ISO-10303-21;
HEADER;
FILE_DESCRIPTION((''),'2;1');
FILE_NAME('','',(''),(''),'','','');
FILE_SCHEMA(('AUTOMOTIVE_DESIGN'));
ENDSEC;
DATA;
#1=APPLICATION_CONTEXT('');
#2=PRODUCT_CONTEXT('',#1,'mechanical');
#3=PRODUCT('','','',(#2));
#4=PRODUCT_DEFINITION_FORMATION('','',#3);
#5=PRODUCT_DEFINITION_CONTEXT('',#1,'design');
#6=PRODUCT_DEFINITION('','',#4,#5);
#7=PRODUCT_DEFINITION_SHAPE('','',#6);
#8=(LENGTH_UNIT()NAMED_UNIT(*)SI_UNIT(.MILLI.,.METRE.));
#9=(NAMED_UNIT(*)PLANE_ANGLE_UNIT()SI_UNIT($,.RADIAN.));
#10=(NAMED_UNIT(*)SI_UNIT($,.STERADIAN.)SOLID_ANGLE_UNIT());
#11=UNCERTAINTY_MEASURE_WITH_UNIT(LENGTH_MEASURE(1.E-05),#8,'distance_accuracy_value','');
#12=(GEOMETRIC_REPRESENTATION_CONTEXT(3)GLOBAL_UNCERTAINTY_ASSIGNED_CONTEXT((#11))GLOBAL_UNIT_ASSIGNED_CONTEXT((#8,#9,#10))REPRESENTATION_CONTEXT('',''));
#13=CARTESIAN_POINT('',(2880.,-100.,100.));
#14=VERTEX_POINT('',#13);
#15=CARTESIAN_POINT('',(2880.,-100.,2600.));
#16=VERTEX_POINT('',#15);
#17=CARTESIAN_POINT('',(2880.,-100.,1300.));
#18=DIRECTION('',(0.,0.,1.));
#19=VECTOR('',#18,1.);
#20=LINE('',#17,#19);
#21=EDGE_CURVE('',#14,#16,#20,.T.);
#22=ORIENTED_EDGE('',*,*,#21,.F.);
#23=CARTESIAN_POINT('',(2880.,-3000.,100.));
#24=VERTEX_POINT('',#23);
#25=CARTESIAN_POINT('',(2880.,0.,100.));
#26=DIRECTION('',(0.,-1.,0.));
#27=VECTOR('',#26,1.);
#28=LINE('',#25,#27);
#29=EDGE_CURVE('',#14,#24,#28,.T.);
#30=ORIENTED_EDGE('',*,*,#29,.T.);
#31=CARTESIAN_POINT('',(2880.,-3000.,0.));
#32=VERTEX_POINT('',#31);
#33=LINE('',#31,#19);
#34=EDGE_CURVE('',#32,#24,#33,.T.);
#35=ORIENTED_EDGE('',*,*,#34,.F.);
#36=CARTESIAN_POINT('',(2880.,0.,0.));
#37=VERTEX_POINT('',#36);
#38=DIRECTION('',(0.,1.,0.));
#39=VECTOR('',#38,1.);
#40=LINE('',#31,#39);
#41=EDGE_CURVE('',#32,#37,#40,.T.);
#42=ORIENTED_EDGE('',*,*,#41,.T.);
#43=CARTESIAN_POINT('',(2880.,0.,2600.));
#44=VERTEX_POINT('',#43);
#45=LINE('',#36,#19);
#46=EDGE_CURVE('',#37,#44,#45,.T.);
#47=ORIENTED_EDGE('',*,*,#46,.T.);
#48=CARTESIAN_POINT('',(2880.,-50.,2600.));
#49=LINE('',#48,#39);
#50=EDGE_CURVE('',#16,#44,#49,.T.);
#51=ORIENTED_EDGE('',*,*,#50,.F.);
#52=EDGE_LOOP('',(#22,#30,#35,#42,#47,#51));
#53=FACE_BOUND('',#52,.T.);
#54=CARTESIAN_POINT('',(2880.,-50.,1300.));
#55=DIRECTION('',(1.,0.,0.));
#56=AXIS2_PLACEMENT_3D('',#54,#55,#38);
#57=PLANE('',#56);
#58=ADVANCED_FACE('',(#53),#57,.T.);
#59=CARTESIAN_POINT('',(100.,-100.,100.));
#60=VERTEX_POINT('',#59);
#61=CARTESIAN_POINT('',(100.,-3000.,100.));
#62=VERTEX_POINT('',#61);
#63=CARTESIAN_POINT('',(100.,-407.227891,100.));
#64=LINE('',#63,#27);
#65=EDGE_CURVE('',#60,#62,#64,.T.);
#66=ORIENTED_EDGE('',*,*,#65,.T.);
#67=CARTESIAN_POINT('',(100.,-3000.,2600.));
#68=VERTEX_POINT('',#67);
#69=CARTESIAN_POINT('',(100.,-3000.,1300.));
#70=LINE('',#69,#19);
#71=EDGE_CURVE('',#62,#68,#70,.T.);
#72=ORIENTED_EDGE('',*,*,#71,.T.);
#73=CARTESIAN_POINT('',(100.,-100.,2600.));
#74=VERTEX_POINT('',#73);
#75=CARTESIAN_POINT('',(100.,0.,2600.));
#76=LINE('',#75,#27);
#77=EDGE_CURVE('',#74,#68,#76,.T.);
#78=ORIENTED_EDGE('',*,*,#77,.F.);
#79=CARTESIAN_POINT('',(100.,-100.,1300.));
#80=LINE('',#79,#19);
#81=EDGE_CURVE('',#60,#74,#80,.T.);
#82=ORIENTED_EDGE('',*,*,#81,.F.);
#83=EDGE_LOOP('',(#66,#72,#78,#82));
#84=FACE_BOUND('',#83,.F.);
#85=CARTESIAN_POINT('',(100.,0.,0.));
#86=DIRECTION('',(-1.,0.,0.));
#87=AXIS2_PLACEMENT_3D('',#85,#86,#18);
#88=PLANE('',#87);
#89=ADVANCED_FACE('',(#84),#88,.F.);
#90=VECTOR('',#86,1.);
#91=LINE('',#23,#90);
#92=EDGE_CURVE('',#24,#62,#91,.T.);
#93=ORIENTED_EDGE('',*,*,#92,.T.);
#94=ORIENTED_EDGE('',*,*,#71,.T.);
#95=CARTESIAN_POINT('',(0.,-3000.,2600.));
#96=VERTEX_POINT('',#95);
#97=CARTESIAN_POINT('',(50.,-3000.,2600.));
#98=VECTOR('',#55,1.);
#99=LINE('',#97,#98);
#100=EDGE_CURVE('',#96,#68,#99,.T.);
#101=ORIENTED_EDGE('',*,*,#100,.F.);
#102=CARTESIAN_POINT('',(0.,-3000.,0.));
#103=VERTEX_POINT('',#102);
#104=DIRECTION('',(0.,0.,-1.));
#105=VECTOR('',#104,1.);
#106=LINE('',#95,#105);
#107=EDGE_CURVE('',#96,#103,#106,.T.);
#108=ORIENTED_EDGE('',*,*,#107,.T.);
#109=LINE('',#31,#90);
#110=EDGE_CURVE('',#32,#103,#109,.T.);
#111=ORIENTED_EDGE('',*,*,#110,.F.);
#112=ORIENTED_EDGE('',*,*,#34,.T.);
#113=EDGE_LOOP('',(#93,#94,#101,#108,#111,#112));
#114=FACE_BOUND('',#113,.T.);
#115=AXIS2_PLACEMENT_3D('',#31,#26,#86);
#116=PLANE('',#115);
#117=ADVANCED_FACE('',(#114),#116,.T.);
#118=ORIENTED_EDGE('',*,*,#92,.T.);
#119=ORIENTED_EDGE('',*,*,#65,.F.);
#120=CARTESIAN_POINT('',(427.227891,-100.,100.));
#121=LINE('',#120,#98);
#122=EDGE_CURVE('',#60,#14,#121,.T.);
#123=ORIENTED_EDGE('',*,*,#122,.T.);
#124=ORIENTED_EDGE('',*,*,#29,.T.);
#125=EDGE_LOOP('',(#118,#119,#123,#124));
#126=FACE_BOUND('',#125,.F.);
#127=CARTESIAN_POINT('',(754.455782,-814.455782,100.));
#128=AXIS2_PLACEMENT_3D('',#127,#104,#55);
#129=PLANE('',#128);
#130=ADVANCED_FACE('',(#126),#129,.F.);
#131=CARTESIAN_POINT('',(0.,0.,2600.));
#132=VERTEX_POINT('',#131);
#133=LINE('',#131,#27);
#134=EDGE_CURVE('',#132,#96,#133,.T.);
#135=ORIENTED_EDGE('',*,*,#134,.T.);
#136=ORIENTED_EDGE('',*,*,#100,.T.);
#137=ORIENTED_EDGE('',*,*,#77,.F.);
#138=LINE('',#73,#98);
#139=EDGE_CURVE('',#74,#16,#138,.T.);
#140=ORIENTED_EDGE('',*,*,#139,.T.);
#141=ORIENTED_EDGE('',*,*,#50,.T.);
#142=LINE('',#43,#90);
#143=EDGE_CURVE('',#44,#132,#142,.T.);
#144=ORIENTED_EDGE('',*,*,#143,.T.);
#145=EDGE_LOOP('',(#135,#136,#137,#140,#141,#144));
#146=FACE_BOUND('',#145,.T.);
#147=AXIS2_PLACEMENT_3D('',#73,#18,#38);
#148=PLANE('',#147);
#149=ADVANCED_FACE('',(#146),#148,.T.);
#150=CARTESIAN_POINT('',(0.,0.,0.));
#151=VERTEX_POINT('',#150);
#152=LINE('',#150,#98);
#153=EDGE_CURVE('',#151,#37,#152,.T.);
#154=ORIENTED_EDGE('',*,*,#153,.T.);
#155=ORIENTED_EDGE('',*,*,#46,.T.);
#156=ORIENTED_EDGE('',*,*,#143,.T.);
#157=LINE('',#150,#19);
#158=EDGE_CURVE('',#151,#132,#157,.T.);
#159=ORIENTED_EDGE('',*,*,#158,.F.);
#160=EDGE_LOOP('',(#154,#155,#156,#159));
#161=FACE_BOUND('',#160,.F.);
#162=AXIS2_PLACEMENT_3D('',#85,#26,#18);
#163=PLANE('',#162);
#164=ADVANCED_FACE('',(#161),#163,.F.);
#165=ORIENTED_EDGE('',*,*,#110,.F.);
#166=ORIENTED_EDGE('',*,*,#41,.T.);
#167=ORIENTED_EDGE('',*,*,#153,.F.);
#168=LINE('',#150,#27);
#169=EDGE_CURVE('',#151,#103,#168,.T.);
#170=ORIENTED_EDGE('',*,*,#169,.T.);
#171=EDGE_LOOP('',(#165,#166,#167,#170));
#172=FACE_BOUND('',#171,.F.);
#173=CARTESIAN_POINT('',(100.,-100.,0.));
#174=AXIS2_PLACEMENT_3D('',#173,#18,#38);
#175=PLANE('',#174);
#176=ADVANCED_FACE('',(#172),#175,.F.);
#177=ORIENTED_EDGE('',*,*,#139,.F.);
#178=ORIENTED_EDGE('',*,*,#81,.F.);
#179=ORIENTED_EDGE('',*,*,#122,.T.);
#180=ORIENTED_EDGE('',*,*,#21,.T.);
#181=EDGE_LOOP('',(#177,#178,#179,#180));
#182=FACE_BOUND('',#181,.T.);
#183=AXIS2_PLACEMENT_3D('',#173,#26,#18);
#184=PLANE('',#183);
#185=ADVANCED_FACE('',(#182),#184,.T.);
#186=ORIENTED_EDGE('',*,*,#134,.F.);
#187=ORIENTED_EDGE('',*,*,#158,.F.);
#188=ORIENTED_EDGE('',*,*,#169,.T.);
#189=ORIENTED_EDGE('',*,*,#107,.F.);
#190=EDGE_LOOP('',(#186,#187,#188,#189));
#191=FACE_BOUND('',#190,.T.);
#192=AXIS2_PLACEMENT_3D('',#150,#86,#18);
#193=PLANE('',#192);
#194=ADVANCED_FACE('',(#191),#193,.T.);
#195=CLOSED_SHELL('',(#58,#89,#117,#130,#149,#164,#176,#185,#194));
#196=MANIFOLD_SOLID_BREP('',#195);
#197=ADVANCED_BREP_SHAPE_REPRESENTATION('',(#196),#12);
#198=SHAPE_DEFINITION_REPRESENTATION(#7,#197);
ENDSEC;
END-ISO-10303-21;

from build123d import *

# Parameters (mm, degrees)
F0_W     = 100
F0_H     = 2600
F1_DEPTH = 3000
F2_W     = 100
F2_H     = 2600
F3_DEPTH = 2780
F4_W     = 2780
F4_H     = 2900
F5_DEPTH = 100


with BuildPart() as f1:
    # F0 (on Front) → F1 (new body)
    with BuildSketch(Plane.XZ):
        with Locations((50, 1300)):
            Rectangle(F0_W, F0_H)
    extrude(amount=F1_DEPTH)

    # F2 (on face) → F3 (join)
    with BuildSketch(Plane.YZ.offset(100)):
        with Locations((-50, 1300)):
            Rectangle(F2_W, F2_H)
    extrude(amount=F3_DEPTH)

    # F4 (on face) → F5 (join)
    with BuildSketch(Plane(origin=(0, 0, 0), x_dir=(1, 0, 0), z_dir=(0, 0, -1))):
        Polygon((100, 3000), (0, 3000), (0, 0), (2880, 0), (2880, 100), (100, 100), align=None)
        with Locations((1490, 1550)):
            Rectangle(F4_W, F4_H)
    extrude(amount=-F5_DEPTH)


solid = f1.part
